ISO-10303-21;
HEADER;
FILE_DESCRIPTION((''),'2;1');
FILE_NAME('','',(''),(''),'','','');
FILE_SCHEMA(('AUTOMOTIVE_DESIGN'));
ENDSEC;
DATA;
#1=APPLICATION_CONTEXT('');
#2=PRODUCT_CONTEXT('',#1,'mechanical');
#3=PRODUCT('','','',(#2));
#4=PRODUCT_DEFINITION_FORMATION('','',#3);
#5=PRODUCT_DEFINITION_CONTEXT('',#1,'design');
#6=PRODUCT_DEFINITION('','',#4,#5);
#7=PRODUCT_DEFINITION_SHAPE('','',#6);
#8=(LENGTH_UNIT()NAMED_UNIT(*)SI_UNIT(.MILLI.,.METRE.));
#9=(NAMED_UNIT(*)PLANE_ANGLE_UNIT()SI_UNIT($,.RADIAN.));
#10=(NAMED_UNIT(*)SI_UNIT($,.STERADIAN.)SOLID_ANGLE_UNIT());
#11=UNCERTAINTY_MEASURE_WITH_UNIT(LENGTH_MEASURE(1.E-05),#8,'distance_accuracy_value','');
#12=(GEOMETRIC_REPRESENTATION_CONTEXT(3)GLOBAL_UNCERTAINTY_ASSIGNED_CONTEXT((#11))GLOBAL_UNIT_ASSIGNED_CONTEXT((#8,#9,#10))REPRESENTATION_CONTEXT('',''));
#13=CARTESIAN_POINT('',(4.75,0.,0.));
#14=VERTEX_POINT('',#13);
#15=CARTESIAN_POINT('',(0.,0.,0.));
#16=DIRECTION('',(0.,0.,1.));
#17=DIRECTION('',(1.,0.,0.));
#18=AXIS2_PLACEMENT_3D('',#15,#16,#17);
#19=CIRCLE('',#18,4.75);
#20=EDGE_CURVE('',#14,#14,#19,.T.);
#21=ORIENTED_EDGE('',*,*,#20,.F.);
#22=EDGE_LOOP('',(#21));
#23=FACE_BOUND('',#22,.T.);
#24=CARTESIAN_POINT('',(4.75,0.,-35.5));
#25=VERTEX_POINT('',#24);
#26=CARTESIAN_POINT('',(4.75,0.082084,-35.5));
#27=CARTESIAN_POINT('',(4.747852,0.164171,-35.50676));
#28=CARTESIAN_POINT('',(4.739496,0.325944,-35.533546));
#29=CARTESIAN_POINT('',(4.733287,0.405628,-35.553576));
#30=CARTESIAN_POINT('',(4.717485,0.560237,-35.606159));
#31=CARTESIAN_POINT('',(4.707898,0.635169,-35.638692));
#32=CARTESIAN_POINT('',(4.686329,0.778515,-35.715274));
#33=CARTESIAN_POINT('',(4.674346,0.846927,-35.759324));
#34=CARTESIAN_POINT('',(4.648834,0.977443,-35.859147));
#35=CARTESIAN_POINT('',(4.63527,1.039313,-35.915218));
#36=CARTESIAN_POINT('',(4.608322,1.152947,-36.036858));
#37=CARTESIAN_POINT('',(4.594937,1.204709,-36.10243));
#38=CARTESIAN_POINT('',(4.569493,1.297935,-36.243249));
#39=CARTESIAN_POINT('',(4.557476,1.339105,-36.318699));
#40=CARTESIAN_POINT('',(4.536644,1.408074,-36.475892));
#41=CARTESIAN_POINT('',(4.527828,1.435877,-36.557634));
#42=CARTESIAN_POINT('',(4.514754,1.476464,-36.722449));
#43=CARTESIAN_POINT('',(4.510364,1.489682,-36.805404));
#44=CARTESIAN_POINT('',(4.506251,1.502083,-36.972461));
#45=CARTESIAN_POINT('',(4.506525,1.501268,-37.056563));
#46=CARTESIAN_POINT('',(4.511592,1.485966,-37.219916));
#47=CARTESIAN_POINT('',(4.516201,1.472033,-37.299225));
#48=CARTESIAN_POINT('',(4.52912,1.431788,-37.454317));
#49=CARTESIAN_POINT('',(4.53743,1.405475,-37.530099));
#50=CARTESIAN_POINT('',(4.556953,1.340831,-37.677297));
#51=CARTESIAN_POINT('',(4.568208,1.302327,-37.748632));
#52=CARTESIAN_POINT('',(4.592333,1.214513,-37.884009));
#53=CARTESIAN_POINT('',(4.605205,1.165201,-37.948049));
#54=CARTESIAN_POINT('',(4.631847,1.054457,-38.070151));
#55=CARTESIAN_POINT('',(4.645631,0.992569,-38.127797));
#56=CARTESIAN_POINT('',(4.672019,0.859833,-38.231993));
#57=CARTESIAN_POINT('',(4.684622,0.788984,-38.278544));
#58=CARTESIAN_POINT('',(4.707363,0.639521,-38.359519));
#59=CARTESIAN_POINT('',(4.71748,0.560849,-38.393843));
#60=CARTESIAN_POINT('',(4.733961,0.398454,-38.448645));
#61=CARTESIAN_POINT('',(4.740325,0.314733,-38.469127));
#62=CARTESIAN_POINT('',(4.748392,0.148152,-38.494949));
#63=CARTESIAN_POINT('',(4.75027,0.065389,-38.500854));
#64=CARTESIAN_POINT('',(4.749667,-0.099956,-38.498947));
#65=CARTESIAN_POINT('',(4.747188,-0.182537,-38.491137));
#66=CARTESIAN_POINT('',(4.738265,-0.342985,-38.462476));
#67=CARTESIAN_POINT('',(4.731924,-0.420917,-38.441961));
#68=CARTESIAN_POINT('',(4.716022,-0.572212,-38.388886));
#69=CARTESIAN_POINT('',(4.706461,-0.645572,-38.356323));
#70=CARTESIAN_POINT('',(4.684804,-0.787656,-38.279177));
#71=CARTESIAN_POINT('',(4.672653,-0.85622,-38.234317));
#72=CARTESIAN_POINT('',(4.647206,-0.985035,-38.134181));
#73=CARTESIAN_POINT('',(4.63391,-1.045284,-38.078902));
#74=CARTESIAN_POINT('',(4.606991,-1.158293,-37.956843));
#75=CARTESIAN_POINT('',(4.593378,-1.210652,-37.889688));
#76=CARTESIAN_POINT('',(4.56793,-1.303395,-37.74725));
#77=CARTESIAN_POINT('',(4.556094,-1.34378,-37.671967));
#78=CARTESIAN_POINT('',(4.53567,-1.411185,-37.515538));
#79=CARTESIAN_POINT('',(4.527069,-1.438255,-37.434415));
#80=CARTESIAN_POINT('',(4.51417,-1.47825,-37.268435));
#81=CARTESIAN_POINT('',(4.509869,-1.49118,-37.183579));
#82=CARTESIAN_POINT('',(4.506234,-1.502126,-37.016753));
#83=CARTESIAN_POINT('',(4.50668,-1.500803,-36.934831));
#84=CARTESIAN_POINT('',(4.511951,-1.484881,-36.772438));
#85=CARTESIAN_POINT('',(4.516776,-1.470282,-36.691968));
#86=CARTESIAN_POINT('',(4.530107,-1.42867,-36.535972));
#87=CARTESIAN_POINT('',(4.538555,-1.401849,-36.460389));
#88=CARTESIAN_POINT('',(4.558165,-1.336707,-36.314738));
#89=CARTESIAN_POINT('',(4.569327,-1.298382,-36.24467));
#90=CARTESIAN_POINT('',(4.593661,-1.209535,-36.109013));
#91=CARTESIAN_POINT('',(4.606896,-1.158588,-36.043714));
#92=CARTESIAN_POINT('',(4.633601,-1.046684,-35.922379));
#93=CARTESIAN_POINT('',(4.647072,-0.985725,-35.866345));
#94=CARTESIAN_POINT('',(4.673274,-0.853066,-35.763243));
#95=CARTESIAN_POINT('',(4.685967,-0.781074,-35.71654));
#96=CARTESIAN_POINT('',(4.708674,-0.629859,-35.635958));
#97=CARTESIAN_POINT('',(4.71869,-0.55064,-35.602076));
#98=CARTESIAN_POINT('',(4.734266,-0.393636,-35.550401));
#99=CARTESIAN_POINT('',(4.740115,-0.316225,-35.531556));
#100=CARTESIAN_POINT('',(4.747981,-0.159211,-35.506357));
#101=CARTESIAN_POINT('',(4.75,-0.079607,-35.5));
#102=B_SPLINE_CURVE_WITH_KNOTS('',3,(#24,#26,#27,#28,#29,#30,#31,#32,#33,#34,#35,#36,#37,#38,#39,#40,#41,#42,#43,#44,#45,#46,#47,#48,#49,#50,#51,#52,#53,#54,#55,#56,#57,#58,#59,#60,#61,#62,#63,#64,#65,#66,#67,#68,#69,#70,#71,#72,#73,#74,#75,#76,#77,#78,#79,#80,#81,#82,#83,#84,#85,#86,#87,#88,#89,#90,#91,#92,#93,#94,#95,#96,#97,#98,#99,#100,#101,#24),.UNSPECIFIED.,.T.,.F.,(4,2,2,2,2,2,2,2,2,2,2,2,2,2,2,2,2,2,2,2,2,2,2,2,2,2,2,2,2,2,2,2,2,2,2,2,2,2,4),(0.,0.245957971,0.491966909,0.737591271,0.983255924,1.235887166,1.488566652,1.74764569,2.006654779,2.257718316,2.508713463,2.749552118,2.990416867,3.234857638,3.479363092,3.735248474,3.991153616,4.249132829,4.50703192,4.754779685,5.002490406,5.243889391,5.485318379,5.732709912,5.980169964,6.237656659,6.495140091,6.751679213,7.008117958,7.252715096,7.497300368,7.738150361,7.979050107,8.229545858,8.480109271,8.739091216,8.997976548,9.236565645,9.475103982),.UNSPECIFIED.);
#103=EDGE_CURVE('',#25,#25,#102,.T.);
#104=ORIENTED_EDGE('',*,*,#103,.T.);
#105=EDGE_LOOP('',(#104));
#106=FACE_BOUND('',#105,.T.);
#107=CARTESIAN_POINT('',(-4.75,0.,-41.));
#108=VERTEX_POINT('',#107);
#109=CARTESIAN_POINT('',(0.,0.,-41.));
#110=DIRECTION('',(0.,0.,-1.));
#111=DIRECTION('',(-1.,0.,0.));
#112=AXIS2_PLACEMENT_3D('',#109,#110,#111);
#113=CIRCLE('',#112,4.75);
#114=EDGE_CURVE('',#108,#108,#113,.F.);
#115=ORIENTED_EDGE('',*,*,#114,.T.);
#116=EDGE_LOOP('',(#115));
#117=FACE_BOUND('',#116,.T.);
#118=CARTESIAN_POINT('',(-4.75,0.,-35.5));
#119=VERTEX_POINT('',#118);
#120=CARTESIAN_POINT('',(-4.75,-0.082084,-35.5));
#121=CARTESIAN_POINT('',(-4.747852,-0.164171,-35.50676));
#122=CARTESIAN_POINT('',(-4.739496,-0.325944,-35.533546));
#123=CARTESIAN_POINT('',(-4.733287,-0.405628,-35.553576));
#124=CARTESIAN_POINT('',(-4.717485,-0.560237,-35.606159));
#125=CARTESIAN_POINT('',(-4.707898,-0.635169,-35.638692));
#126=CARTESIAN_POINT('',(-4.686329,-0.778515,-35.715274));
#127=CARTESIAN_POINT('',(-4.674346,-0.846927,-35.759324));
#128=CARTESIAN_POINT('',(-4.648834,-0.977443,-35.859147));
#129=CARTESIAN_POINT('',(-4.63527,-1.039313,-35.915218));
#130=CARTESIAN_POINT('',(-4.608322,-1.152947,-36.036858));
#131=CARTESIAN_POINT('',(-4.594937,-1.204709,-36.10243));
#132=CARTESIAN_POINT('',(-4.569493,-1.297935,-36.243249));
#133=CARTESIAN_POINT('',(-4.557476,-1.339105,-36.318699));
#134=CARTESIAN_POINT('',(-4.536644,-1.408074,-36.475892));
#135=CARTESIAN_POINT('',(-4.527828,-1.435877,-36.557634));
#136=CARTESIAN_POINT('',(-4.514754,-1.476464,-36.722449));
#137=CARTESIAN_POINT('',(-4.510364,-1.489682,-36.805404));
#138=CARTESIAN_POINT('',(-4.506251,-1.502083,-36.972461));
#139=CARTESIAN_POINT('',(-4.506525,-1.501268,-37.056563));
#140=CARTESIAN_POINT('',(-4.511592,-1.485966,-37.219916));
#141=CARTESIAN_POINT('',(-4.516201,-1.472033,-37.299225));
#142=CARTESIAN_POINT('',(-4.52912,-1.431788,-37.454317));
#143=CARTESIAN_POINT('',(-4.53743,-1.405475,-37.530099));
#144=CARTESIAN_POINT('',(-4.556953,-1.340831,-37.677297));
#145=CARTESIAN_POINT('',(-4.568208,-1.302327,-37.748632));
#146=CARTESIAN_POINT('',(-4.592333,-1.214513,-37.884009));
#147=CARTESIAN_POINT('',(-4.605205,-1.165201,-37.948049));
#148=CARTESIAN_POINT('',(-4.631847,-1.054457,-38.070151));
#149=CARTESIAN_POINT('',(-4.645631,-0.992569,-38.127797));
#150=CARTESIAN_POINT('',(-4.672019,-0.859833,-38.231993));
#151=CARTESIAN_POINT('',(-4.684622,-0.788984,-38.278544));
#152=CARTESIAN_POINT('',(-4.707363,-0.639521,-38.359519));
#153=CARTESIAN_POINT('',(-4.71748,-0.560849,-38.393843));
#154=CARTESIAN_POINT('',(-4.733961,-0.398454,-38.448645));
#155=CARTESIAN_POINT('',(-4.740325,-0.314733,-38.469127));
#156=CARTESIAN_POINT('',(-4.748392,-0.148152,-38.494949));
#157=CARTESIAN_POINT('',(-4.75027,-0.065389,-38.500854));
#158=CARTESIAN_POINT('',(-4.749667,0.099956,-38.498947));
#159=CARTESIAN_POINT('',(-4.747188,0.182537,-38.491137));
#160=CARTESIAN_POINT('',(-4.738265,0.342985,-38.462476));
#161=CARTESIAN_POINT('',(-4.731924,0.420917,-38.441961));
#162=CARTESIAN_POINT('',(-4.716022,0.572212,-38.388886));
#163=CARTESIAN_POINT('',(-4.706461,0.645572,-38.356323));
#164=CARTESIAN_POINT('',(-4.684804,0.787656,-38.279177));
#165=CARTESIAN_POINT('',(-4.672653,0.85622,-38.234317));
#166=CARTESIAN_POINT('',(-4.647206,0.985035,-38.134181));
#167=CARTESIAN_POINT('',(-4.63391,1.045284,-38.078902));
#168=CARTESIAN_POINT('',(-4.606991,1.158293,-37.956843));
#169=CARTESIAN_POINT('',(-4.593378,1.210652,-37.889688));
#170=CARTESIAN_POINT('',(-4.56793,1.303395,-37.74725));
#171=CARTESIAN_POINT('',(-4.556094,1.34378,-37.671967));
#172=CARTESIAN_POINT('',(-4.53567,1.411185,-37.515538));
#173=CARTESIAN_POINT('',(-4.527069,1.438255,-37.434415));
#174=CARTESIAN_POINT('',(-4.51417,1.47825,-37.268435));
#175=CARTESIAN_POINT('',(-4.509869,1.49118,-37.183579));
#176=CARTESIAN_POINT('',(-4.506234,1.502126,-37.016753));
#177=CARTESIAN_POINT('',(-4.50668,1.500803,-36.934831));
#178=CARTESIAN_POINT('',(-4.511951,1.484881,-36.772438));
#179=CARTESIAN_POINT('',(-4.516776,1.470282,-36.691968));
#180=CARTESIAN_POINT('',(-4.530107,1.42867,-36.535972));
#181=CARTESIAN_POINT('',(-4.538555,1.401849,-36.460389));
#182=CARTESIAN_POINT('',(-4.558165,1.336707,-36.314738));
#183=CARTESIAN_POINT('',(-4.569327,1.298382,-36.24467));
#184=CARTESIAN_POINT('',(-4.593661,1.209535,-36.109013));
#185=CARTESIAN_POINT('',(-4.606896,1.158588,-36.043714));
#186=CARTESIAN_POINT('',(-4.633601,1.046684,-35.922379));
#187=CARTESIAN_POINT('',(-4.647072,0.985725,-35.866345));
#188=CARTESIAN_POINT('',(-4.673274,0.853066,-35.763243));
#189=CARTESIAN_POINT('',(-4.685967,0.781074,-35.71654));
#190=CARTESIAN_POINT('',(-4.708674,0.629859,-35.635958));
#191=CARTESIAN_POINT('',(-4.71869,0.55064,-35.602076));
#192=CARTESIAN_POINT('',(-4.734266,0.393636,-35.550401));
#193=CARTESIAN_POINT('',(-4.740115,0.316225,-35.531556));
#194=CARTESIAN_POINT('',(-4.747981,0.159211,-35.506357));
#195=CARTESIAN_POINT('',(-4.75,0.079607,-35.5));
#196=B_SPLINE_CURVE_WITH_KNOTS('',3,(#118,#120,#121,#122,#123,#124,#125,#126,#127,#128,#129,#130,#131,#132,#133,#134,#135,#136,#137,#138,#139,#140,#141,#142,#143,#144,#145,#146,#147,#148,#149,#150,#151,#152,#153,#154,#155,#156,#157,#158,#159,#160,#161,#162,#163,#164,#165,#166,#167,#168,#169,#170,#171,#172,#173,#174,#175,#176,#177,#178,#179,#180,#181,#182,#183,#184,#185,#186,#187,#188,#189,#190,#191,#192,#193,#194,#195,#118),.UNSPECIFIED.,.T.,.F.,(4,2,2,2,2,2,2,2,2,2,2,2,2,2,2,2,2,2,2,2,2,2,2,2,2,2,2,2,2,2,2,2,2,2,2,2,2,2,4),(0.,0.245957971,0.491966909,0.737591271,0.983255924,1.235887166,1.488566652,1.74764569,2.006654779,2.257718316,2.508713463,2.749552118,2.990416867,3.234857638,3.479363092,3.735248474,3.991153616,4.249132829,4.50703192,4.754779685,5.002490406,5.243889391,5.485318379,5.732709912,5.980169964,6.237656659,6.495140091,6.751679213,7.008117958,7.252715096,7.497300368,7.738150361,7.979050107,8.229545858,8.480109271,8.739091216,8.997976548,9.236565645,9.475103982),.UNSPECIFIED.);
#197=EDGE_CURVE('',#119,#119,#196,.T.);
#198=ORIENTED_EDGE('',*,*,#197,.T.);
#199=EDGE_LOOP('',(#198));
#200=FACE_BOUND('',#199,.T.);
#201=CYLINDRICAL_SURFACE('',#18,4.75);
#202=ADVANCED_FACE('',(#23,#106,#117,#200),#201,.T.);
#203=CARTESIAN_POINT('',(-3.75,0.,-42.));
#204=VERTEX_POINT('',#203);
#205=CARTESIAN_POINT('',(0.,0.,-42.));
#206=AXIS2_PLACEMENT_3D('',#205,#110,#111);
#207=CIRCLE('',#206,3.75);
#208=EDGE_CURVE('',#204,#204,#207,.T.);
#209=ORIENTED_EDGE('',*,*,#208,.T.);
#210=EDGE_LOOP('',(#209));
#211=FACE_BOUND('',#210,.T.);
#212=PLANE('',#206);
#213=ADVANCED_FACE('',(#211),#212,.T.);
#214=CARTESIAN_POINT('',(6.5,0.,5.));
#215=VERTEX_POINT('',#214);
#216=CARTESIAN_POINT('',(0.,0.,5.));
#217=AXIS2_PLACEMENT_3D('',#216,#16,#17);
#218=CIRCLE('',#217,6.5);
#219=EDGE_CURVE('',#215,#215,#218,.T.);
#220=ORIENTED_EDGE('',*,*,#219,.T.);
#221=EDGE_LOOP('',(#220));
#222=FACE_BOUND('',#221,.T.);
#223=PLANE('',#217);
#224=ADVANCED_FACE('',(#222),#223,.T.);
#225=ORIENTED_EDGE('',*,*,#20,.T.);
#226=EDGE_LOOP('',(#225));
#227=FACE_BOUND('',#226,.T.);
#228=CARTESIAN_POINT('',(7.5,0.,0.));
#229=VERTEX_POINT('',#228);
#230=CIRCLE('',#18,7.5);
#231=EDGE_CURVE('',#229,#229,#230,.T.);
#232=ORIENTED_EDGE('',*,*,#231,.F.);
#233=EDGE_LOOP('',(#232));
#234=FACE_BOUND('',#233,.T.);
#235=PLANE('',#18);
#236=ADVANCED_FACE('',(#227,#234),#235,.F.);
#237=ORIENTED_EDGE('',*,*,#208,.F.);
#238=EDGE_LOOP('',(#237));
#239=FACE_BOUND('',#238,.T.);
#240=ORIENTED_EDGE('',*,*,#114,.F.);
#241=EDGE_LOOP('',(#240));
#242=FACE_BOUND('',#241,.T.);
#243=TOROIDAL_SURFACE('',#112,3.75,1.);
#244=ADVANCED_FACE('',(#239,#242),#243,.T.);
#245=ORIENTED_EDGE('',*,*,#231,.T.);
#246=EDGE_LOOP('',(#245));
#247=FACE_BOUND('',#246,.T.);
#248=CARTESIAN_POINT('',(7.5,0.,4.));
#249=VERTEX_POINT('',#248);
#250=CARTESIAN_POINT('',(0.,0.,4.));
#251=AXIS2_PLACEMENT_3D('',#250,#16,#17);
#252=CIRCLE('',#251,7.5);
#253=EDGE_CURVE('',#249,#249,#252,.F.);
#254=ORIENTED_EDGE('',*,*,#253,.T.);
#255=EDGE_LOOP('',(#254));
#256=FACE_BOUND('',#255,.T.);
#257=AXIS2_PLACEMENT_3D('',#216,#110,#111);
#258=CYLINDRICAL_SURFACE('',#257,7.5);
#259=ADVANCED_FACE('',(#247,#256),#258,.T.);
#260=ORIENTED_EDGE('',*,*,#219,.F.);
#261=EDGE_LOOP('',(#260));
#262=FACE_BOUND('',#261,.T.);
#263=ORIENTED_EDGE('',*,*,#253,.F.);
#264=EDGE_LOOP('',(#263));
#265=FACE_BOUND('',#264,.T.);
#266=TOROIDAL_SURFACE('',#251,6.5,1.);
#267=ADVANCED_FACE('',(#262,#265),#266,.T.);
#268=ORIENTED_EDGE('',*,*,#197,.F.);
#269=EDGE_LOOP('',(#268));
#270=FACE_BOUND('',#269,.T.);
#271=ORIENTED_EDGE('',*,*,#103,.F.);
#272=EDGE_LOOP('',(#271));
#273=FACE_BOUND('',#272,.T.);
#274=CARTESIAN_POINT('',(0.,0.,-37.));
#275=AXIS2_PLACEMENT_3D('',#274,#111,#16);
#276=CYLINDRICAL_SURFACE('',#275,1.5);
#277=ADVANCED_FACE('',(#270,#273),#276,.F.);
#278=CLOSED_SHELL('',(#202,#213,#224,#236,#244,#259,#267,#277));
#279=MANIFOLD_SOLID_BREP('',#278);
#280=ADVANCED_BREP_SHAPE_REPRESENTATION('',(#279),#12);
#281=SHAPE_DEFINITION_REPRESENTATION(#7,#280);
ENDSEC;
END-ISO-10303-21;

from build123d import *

# Parameters (mm, degrees)
ESQUISSE1_R                         = 7.5
BOSS_EXTRU_1_DEPTH                  = 5
CONG_1_R                            = 1
ESQUISSE12_W                        = 4.75
ESQUISSE12_H                        = 42
CONG_2_R                            = 1
ENL_V_START                         = -4.7500001
ENL_V_DE_MAT_R_VOL_MINCE2_OUTLINE_R = 1.5
ENL_V_DE_MAT_R_VOL_MINCE2_DEPTH     = 9.5000002


# Read off the part's stored shape, not the designer's step: Enlèv. de mat.-Révol.-Mince2
with BuildPart() as part:
    # Esquisse1 → Boss.-Extru.1 (new body)
    with BuildSketch(Plane.XY):
        Circle(ESQUISSE1_R)
    extrude(amount=BOSS_EXTRU_1_DEPTH)

    # Congé1
    cong_1_edges = [part.edges().sort_by_distance(p)[0] for p in [
        (-7.5, 0, 5),
    ]]
    fillet(cong_1_edges, radius=CONG_1_R)

    # Esquisse12 → Révolution1 (revolve)
    with BuildSketch(Plane(origin=(0, 0, 0), x_dir=(1, 0, 0), z_dir=(0, 1, 0))):
        with Locations((2.375, 21)):
            Rectangle(ESQUISSE12_W, ESQUISSE12_H)
    revolve(axis=Axis((0, 0, 0), (0, 0, -1)))

    # Congé2
    cong_2_edges = [part.edges().sort_by_distance(p)[0] for p in [
        (-4.75, 0, -42),
    ]]
    fillet(cong_2_edges, radius=CONG_2_R)

    # Enlèv. de mat.-Révol.-Mince2 outline → Enlèv. de mat.-Révol.-Mince2 (cut)
    with BuildSketch(Plane.YZ.offset(ENL_V_START)):
        with Locations((0, -37)):
            Circle(ENL_V_DE_MAT_R_VOL_MINCE2_OUTLINE_R)
    extrude(amount=ENL_V_DE_MAT_R_VOL_MINCE2_DEPTH, mode=Mode.SUBTRACT)


solid = part.part
